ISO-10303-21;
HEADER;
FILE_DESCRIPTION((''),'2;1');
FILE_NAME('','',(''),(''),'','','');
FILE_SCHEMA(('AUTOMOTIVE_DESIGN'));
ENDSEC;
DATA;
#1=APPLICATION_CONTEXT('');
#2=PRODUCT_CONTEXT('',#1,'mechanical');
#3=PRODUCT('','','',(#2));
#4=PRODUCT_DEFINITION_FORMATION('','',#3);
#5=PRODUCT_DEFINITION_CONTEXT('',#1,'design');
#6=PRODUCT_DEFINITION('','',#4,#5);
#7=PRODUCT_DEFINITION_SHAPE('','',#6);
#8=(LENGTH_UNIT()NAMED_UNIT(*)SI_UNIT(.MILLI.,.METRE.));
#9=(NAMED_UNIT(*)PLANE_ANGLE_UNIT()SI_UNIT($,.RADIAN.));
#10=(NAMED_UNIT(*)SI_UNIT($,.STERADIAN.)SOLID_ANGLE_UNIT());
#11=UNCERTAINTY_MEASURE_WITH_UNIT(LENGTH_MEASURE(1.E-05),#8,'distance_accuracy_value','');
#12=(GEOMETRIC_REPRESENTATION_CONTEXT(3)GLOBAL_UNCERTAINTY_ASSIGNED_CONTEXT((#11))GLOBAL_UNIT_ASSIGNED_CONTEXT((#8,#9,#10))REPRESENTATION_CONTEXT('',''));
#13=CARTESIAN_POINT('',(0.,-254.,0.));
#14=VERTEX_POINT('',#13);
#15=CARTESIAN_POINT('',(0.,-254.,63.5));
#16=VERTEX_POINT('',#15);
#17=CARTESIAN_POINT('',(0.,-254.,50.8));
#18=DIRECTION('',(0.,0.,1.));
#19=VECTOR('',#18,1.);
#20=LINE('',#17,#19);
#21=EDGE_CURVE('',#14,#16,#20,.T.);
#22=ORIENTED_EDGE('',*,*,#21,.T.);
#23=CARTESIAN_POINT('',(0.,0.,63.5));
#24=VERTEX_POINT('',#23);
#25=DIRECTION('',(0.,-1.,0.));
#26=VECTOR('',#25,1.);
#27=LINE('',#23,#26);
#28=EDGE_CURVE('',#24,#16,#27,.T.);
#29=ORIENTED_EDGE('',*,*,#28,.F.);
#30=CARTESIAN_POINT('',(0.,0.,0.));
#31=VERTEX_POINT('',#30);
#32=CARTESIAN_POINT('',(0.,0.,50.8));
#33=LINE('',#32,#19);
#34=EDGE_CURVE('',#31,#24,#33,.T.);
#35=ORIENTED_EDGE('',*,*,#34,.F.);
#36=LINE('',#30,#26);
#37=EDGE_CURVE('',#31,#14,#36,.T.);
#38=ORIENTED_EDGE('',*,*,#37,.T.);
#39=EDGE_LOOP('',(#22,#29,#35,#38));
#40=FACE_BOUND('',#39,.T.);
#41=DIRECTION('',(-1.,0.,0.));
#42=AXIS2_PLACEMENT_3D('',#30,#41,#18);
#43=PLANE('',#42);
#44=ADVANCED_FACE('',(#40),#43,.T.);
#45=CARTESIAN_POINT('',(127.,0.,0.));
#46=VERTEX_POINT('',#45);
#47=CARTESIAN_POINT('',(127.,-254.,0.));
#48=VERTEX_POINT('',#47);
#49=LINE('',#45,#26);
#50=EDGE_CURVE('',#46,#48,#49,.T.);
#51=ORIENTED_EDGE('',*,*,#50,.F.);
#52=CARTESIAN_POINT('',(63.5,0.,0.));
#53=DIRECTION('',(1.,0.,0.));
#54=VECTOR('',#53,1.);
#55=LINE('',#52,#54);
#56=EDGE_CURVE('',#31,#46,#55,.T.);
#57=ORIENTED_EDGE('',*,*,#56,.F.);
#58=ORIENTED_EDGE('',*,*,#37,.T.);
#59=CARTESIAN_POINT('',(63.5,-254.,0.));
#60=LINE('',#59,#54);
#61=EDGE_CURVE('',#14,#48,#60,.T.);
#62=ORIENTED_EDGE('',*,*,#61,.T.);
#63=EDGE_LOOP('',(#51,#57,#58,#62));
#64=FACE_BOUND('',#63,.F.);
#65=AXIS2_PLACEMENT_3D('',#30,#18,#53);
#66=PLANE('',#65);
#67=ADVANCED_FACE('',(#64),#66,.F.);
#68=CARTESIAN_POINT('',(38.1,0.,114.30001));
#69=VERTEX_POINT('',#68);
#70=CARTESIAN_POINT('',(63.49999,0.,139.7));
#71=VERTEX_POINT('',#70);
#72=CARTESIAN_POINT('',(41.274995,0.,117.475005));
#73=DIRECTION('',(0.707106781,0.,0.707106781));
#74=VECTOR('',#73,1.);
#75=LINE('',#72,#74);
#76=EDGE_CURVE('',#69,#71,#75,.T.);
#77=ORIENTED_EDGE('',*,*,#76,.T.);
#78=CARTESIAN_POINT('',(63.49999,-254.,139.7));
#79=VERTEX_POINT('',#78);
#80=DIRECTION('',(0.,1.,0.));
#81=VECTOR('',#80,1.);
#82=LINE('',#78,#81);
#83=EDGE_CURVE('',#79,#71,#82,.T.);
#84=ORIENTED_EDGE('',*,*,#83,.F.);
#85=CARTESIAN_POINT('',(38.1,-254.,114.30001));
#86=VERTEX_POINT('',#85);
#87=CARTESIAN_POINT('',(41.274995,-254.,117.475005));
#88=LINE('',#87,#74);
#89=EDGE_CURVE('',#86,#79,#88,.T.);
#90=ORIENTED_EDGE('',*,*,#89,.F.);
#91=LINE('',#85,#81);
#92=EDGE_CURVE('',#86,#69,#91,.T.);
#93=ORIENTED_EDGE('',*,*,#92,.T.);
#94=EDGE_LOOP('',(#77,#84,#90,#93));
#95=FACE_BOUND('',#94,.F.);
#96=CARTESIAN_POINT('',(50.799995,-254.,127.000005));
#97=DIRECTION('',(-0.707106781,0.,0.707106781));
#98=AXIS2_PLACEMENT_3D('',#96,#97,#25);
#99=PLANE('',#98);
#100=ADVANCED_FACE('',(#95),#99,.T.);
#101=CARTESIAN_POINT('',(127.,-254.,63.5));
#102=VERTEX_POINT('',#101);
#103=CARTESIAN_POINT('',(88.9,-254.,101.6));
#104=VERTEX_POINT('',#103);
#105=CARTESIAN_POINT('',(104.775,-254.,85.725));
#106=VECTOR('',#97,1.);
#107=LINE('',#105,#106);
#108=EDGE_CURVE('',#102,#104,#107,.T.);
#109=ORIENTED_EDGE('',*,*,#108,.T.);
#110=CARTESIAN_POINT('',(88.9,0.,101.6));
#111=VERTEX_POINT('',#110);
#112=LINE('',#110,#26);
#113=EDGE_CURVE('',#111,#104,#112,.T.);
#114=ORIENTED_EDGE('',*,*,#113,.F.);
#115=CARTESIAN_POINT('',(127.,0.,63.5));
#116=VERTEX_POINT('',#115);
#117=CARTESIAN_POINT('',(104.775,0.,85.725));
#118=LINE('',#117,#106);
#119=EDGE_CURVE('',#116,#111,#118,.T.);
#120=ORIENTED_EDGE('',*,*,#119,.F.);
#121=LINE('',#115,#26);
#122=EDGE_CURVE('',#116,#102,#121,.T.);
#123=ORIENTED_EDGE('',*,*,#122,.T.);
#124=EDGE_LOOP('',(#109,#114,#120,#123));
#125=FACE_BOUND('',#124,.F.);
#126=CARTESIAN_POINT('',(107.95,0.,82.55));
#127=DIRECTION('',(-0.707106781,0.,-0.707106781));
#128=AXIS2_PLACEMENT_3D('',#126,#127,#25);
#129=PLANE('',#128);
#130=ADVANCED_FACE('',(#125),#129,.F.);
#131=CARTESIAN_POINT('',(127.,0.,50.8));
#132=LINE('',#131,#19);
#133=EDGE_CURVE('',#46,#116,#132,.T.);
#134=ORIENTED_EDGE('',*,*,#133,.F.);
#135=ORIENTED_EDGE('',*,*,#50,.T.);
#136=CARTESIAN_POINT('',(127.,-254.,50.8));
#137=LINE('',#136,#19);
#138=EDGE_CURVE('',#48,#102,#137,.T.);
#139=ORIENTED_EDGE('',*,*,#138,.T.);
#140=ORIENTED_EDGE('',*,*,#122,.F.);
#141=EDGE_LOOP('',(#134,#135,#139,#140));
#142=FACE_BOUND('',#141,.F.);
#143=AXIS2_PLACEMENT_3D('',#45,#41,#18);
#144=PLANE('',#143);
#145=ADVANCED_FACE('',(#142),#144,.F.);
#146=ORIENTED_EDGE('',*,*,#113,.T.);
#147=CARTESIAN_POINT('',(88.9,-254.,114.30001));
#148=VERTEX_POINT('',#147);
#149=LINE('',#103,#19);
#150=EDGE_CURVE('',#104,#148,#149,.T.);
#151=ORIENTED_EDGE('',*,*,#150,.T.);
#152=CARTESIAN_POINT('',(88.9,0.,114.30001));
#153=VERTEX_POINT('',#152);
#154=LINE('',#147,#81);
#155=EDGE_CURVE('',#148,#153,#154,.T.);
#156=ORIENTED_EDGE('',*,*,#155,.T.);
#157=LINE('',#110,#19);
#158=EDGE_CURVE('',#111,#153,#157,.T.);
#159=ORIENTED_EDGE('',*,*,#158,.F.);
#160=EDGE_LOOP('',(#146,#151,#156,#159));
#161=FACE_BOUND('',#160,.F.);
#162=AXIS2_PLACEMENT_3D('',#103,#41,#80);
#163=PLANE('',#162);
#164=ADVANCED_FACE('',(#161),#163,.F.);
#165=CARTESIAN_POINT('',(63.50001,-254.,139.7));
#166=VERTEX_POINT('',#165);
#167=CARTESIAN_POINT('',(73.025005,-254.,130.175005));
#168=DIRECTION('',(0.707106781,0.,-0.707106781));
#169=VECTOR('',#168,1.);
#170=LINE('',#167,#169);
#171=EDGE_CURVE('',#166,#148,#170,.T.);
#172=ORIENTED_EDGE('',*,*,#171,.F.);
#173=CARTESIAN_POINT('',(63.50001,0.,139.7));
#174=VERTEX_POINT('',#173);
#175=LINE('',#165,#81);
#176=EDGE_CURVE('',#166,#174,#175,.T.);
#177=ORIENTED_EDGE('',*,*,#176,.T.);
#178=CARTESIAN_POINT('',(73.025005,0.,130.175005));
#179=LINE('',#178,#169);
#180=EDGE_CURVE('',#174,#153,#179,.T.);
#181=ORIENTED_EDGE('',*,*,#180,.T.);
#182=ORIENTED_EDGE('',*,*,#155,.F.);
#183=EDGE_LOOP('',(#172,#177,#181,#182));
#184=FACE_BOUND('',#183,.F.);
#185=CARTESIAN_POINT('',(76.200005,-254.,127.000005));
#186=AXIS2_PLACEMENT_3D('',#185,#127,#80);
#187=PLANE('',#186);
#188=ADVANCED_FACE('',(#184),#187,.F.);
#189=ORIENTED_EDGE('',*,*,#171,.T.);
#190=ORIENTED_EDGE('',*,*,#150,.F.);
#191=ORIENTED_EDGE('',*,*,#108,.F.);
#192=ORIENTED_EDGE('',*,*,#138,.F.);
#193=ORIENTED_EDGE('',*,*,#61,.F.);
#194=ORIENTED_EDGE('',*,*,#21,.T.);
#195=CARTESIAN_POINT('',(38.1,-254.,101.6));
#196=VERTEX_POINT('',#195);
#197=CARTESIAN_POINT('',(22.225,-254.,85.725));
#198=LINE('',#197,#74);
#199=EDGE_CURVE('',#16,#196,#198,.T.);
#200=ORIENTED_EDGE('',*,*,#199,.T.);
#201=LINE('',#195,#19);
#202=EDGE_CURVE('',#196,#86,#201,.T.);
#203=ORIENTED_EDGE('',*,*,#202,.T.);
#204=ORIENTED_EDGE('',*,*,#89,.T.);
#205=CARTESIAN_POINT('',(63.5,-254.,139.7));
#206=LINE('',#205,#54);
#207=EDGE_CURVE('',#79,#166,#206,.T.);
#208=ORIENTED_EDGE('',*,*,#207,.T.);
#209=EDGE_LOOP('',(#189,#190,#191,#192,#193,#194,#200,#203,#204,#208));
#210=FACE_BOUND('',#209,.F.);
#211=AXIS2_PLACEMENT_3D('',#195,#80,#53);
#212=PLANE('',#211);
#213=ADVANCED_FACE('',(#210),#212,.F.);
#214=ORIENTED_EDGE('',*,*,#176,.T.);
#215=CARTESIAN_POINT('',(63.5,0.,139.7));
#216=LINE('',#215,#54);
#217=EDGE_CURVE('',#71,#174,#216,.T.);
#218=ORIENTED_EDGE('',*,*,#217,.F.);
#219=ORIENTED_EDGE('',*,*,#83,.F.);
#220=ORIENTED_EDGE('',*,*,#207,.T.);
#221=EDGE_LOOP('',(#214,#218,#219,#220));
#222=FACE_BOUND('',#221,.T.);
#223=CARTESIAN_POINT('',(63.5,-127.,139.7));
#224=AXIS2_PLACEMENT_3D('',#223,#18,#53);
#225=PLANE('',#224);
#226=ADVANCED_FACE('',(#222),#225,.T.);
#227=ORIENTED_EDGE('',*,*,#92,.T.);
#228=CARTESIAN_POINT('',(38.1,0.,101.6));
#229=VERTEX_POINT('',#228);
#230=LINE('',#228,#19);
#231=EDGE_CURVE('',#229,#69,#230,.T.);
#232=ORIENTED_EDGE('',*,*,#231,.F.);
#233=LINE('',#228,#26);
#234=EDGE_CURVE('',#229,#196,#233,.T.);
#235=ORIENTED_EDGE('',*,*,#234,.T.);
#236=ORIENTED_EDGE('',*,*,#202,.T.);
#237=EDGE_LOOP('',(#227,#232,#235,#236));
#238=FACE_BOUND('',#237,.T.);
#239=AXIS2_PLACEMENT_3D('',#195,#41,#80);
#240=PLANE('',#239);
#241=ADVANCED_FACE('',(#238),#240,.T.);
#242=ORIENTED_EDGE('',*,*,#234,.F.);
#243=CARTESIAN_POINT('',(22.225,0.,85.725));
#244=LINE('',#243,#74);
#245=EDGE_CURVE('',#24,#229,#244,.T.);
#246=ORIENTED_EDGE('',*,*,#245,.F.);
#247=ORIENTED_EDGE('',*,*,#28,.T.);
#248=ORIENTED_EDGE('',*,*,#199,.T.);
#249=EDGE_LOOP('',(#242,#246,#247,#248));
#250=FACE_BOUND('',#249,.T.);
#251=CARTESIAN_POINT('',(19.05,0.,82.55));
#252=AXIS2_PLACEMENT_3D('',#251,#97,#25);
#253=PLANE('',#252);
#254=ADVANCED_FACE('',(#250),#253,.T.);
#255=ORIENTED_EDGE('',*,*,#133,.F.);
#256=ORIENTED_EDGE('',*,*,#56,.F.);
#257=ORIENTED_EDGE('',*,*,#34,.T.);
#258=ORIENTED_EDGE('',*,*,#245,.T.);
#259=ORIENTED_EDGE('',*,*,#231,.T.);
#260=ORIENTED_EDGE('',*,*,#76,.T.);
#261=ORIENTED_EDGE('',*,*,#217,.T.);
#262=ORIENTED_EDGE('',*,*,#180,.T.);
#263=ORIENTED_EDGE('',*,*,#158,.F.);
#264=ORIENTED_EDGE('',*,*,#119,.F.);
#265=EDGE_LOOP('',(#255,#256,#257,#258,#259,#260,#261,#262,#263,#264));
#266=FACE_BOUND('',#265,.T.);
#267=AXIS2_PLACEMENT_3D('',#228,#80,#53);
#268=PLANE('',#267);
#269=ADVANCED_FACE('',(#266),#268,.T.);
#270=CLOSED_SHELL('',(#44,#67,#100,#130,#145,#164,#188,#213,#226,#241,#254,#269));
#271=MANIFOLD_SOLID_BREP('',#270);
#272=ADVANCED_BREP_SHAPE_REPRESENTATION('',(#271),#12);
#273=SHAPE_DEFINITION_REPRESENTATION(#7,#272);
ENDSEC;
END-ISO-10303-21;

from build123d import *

# Parameters (mm, degrees)
F0_W     = 127
F0_H     = 101.6
F1_DEPTH = 254
F2_SIZE  = 38.1
F3_W     = 50.8
F3_H     = 254
F4_DEPTH = 38.1
F5_SIZE  = 25.39999


# Not quite as in the source:
# - a fillet or chamfer is up to 0.001 mm smaller than in the source, because OpenCascade refuses the exact size


with BuildPart() as f1:
    # F0 (on Front) → F1 (new body)
    with BuildSketch(Plane.XZ):
        with Locations((63.5, 50.8)):
            Rectangle(F0_W, F0_H)
    extrude(amount=F1_DEPTH)

    # F2
    f2_edges = [f1.edges().sort_by_distance(p)[0] for p in [
        (127, -127, 101.6),
        (0, -127, 101.6),
    ]]
    chamfer(f2_edges, length=F2_SIZE)

    # F3 (on face) → F4 (join)
    with BuildSketch(Plane.XY.offset(101.6)):
        with Locations((63.5, -127)):
            Rectangle(F3_W, F3_H)
    extrude(amount=F4_DEPTH)

    # F5 (size 25.4 in the source; OpenCascade refuses exactly that, so slightly less here)
    f5_edges = [f1.edges().sort_by_distance(p)[0] for p in [
        (38.1, -127, 139.7),
        (88.9, -127, 139.7),
    ]]
    chamfer(f5_edges, length=F5_SIZE)


solid = f1.part
